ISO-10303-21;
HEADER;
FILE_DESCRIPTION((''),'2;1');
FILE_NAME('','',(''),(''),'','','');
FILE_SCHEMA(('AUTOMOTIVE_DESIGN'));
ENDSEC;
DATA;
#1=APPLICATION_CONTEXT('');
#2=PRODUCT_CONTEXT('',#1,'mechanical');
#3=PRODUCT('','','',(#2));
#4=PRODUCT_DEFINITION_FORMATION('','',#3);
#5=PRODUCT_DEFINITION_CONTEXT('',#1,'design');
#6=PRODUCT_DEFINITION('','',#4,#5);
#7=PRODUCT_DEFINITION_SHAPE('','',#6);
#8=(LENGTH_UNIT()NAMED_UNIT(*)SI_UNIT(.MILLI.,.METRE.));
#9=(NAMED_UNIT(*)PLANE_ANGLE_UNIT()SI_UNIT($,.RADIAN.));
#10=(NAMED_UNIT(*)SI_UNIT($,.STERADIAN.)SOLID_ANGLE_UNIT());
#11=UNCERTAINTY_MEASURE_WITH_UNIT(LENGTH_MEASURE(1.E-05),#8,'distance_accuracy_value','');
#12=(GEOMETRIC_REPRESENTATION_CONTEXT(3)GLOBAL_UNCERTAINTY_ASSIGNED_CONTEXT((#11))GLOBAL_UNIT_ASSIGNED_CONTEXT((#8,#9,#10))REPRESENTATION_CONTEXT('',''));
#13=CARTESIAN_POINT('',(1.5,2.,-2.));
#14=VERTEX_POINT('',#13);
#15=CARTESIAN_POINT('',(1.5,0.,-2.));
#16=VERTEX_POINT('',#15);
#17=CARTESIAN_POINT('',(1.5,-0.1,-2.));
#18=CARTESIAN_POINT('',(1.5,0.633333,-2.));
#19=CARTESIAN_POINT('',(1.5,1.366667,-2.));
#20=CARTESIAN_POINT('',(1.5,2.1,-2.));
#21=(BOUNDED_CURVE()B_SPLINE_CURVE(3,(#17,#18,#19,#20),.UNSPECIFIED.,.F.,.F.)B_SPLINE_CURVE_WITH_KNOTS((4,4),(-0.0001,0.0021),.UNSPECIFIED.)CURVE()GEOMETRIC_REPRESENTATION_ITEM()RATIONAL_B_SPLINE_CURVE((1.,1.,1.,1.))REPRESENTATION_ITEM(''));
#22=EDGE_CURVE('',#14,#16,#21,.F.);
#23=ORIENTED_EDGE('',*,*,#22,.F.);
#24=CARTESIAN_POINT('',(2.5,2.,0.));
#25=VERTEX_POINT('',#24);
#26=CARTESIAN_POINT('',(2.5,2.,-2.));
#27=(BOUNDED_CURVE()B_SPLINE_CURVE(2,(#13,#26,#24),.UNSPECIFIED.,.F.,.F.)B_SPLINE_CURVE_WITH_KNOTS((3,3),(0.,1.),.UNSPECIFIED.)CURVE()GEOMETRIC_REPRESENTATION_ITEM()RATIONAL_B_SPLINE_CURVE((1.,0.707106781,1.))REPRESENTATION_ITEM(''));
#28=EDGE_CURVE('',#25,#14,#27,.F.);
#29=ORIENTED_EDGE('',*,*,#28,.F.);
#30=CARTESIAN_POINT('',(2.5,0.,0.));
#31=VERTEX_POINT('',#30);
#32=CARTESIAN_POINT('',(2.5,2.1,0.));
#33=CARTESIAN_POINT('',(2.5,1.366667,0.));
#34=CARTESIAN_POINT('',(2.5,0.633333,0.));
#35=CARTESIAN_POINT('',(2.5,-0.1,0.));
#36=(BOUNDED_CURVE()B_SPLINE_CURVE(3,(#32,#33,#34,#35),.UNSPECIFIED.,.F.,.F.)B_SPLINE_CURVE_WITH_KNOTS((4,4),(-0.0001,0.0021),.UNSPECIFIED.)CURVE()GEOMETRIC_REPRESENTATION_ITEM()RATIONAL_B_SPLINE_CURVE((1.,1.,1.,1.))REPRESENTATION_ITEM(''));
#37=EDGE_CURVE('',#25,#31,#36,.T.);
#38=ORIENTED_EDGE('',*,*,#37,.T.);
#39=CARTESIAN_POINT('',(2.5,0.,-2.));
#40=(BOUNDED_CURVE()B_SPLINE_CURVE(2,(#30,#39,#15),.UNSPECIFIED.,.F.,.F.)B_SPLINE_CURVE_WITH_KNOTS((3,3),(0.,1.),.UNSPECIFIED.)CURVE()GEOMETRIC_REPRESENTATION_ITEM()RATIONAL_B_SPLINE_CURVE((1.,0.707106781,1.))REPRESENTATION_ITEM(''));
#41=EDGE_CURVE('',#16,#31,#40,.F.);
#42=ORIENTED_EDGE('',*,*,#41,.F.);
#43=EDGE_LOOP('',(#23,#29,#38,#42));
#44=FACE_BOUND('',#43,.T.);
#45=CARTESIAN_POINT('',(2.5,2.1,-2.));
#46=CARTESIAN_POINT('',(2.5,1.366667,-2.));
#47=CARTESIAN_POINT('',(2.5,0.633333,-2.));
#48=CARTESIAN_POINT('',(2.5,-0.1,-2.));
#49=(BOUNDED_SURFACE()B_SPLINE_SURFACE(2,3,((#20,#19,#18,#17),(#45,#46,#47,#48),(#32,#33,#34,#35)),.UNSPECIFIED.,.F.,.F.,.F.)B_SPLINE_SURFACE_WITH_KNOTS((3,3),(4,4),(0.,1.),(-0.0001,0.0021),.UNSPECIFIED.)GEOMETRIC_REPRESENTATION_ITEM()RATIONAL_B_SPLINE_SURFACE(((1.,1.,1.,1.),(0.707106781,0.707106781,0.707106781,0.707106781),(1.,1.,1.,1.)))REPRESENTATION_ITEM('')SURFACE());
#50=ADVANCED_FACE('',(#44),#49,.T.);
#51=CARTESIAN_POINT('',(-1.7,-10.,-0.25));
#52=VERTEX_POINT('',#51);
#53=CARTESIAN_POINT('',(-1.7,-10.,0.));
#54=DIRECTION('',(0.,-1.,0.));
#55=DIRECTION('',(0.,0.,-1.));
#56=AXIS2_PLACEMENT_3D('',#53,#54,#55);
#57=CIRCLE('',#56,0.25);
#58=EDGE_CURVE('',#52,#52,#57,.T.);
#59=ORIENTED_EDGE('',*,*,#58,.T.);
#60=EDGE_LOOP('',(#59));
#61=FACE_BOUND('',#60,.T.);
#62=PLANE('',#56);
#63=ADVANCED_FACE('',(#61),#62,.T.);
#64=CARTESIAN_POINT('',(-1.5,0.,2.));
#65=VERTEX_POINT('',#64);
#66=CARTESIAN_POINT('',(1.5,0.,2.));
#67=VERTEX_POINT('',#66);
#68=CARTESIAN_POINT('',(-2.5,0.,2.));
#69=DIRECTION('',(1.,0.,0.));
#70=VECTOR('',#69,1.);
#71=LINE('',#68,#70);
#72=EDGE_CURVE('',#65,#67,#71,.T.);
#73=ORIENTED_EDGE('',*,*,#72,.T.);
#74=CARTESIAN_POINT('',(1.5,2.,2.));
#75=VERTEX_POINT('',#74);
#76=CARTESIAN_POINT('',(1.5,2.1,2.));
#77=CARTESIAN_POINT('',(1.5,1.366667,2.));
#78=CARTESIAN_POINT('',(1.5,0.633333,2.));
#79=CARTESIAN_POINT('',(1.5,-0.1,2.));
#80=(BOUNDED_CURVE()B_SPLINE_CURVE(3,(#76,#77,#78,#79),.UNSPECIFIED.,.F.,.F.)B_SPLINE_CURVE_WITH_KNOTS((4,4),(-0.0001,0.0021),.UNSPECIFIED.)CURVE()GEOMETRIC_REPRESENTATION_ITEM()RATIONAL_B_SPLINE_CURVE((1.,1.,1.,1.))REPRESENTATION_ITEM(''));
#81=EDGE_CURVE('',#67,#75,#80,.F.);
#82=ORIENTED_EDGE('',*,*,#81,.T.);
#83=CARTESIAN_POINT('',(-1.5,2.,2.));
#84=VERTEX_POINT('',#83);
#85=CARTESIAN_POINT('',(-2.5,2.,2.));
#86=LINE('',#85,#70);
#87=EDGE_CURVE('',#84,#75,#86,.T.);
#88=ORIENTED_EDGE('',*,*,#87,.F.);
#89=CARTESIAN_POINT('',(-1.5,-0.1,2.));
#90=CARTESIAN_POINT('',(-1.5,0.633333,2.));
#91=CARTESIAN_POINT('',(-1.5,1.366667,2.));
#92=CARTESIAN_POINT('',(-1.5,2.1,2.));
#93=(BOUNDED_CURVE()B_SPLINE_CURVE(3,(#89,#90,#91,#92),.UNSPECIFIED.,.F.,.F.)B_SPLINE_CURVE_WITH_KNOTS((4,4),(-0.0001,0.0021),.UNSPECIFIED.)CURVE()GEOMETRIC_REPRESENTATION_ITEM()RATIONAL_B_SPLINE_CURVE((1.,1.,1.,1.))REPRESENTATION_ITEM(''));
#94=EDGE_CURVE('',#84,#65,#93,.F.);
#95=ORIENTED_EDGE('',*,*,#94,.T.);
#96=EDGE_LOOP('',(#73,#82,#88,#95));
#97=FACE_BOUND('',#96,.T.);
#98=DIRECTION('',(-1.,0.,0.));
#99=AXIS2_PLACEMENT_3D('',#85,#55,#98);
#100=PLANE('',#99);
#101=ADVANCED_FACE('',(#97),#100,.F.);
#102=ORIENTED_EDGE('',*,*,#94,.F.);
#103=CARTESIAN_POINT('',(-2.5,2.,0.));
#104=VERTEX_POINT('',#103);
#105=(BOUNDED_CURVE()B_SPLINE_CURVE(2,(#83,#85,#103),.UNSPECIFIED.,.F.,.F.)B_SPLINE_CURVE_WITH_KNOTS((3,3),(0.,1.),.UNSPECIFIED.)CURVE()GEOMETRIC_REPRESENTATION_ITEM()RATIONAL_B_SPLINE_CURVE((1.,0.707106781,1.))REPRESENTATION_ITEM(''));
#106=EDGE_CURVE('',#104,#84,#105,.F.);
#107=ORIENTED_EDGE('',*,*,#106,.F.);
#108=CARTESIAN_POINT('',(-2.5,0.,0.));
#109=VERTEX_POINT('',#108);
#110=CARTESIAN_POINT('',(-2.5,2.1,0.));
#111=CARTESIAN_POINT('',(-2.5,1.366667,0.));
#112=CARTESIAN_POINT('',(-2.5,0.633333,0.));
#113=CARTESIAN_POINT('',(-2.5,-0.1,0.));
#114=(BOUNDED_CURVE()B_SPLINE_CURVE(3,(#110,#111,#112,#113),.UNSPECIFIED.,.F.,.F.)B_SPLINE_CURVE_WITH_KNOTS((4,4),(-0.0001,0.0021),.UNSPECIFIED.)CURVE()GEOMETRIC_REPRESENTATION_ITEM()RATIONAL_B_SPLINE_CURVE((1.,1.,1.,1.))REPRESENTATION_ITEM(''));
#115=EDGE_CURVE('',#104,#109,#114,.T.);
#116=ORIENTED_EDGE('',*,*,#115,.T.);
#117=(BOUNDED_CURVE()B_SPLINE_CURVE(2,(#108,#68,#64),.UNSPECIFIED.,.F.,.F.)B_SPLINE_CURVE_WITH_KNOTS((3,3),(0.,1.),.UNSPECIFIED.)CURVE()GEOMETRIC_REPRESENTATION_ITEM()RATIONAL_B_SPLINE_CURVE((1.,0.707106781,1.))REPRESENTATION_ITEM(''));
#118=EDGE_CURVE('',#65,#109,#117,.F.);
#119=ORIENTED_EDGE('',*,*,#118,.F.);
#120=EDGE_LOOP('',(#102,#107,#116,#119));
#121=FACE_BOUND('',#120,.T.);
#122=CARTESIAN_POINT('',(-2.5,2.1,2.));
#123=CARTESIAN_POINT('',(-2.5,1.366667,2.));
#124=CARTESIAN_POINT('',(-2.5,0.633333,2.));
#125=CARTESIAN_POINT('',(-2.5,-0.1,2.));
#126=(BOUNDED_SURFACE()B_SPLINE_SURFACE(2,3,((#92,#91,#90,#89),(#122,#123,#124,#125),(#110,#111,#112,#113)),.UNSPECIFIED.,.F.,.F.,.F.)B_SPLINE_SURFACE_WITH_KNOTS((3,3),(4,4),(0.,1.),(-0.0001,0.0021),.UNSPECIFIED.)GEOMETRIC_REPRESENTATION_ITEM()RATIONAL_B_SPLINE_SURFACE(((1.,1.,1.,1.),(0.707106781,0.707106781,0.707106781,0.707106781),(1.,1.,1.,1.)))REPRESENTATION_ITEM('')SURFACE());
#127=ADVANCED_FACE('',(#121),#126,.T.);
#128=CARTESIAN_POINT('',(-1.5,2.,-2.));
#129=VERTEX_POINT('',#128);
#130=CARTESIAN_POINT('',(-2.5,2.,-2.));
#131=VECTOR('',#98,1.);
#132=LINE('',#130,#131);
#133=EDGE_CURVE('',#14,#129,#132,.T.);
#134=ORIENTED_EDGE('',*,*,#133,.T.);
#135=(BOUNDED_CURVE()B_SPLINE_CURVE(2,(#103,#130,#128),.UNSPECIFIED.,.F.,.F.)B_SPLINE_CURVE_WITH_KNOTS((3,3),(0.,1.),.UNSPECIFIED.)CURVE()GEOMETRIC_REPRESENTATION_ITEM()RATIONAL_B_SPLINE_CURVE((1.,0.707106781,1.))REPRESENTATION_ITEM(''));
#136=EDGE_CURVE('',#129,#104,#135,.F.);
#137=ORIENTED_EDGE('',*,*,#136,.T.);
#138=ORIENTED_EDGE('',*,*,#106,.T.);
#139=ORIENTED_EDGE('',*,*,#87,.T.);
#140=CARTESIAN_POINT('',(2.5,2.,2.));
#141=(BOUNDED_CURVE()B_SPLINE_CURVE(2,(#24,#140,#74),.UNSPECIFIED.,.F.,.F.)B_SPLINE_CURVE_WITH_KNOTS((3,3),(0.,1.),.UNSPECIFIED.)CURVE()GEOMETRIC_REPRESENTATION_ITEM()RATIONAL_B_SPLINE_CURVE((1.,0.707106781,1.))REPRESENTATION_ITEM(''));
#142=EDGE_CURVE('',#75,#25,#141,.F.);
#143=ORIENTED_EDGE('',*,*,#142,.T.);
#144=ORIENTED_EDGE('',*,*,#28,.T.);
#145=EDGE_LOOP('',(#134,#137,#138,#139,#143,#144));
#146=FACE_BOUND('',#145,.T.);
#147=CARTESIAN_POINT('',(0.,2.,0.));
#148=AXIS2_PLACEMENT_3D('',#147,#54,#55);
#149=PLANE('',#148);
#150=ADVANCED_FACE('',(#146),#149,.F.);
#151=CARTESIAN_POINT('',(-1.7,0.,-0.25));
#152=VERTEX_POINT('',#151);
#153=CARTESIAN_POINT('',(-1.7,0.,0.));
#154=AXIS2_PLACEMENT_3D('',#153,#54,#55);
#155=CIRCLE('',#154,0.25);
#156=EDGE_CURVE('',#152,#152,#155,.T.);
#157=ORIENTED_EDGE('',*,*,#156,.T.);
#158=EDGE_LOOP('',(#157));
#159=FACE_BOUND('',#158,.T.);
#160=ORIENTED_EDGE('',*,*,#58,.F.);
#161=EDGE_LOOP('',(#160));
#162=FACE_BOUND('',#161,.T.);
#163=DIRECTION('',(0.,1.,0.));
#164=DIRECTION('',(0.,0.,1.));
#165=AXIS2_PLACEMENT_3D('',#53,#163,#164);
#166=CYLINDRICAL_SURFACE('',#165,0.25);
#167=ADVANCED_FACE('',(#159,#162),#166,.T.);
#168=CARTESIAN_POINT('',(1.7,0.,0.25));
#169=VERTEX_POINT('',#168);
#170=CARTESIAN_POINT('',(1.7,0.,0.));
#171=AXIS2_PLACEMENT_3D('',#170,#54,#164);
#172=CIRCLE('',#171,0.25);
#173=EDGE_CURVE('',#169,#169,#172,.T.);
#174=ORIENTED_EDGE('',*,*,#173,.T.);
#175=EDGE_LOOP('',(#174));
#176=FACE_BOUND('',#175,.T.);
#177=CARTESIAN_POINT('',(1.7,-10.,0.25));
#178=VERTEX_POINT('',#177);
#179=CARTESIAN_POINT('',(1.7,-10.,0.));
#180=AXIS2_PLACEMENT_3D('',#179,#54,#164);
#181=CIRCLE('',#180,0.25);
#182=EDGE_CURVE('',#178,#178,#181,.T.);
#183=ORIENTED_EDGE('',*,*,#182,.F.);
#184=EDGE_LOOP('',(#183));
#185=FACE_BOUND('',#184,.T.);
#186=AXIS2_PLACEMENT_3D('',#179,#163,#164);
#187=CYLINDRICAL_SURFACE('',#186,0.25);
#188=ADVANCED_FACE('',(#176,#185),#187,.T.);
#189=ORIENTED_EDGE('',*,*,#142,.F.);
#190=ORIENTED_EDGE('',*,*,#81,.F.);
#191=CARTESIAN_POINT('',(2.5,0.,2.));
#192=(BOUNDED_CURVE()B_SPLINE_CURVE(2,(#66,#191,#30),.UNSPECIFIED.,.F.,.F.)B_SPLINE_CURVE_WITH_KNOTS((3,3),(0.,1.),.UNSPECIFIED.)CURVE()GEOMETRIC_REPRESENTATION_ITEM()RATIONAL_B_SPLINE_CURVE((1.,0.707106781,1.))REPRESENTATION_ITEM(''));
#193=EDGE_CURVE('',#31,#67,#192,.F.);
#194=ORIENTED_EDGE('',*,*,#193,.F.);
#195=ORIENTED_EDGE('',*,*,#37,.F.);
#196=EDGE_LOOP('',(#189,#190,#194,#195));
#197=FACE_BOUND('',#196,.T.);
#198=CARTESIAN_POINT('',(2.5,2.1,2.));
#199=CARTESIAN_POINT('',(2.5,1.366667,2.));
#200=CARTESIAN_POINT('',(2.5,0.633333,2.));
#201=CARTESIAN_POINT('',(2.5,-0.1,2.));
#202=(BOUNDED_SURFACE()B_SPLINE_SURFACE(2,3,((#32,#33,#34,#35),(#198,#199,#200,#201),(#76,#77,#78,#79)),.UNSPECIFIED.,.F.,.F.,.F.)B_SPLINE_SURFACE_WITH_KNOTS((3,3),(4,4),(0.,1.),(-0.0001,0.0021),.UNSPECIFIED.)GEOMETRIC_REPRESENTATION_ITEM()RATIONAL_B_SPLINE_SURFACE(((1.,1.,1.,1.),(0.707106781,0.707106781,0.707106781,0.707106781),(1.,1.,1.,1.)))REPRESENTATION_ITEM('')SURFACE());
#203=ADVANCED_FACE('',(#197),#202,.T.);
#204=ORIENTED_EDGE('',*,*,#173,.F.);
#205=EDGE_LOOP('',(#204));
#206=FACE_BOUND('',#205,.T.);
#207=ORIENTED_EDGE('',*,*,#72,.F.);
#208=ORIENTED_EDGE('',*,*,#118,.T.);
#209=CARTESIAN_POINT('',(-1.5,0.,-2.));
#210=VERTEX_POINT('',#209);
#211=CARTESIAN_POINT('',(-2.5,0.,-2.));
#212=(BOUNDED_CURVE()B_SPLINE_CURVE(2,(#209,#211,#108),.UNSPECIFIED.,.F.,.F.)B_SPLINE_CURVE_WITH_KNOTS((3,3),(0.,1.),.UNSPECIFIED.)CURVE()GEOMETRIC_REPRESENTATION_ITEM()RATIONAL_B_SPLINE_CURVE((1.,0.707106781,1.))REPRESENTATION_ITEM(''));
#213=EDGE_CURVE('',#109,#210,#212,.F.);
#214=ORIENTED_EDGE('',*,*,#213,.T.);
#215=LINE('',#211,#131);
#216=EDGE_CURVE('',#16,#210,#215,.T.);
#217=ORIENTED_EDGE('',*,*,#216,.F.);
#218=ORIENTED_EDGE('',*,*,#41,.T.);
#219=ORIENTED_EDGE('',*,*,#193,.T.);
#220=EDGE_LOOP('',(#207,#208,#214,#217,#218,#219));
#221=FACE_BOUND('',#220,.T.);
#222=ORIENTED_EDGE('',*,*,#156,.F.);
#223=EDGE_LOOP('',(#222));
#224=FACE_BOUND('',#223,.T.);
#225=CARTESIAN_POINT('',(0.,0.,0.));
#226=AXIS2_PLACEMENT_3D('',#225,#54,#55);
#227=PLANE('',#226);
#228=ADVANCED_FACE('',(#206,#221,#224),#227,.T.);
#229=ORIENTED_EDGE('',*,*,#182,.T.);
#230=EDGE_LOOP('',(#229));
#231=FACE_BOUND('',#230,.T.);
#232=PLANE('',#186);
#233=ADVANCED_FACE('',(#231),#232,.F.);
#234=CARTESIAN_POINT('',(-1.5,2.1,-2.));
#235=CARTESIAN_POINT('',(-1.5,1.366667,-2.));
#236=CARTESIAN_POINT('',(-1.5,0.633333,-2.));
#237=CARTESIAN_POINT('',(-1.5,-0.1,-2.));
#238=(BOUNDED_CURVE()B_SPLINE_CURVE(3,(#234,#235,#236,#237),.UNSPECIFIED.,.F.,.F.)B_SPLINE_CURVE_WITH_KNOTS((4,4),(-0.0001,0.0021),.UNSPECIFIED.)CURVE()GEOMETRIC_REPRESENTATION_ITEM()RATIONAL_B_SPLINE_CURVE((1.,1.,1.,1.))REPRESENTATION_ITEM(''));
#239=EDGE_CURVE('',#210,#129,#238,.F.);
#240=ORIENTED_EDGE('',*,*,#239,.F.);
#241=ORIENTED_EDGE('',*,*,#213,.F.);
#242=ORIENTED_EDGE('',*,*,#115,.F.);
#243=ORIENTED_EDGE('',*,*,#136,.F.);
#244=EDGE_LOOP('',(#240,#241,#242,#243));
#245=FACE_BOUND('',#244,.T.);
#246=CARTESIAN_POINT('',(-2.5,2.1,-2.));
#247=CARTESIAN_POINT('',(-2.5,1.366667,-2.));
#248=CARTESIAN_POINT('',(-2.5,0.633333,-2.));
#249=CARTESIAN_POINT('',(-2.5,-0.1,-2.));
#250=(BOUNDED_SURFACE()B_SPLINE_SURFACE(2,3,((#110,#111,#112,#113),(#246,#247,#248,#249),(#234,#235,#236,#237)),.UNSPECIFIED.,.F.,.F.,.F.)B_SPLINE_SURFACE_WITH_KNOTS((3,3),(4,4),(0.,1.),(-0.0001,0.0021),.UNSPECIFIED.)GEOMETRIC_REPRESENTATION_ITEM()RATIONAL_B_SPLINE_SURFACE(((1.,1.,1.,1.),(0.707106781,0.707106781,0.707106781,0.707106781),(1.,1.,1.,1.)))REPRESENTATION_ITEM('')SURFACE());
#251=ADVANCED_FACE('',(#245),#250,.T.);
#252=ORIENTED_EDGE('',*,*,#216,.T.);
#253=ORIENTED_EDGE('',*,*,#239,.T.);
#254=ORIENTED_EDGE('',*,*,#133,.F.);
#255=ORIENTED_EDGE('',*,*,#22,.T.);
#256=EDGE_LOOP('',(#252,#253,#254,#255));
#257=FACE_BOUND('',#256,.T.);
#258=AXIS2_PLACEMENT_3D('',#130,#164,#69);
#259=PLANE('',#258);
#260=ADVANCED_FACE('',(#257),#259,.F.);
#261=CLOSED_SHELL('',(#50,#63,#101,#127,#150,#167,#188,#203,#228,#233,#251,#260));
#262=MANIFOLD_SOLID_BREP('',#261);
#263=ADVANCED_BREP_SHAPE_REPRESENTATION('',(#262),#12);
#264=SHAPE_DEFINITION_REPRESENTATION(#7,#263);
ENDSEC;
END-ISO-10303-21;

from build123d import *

# Parameters (mm, degrees)
SKETCH1_W           = 5
SKETCH1_H           = 4
BOSS_EXTRUDE1_DEPTH = 2
SKETCH2_R           = 0.25
BOSS_EXTRUDE2_DEPTH = 10
FILLET1_SIZE        = 2
FILLET1_SIZE_2      = 1
FILLET2_SIZE        = 1
FILLET2_SIZE_2      = 2


with BuildPart() as part:
    # Sketch1 → Boss-Extrude1 (new body)
    with BuildSketch(Plane(origin=(0, 0, 0), x_dir=(1, 0, 0), z_dir=(0, 1, 0))):
        Rectangle(SKETCH1_W, SKETCH1_H)
    extrude(amount=BOSS_EXTRUDE1_DEPTH)

    # Sketch2 → Boss-Extrude2 (add)
    with BuildSketch(Plane.XZ):
        with Locations(Location((-1.7, 0, 0), (0, 0, 270))):
            Circle(SKETCH2_R)
        with Locations(Location((1.7, 0, 0), (0, 0, 90))):
            Circle(SKETCH2_R)
    extrude(amount=BOSS_EXTRUDE2_DEPTH)

    # Fillet1
    # an asymmetric fillet: 2, 1 mm, written as the material it takes off along each edge
    with BuildSketch(Plane(origin=(-2.5, -5, -2), x_dir=(0, 0, 1), z_dir=(0, 1, 0))) as fillet1_piece_1:
        with BuildLine():
            Bezier((FILLET1_SIZE, 0), (0, 0), (0, FILLET1_SIZE_2), weights=[1, 0.707106781, 1])
            Line((0, FILLET1_SIZE_2), (0, 0))
            Line((0, 0), (FILLET1_SIZE, 0))
        make_face()
    extrude(amount=12, mode=Mode.SUBTRACT)
    with BuildSketch(Plane(origin=(2.5, -5, 2), x_dir=(-1, 0, 0), z_dir=(0, 1, 0))) as fillet1_piece_2:
        with BuildLine():
            Bezier((FILLET1_SIZE_2, 0), (0, 0), (0, -FILLET1_SIZE), weights=[1, 0.707106781, 1])
            Line((0, -FILLET1_SIZE), (0, 0))
            Line((0, 0), (FILLET1_SIZE_2, 0))
        make_face()
    extrude(amount=12, mode=Mode.SUBTRACT)

    # Fillet2
    # an asymmetric fillet: 2, 1 mm, written as the material it takes off along each edge
    with BuildSketch(Plane(origin=(-2.5, -5, 2), x_dir=(1, 0, 0), z_dir=(0, 1, 0)), Plane(origin=(2.5, -5, -2), x_dir=(-1, 0, 0), z_dir=(0, 1, 0))) as fillet2_piece_1:
        with BuildLine():
            Bezier((FILLET2_SIZE, 0), (0, 0), (0, FILLET2_SIZE_2), weights=[1, 0.707106781, 1])
            Line((0, FILLET2_SIZE_2), (0, 0))
            Line((0, 0), (FILLET2_SIZE, 0))
        make_face()
    extrude(amount=12, mode=Mode.SUBTRACT)


solid = part.part
